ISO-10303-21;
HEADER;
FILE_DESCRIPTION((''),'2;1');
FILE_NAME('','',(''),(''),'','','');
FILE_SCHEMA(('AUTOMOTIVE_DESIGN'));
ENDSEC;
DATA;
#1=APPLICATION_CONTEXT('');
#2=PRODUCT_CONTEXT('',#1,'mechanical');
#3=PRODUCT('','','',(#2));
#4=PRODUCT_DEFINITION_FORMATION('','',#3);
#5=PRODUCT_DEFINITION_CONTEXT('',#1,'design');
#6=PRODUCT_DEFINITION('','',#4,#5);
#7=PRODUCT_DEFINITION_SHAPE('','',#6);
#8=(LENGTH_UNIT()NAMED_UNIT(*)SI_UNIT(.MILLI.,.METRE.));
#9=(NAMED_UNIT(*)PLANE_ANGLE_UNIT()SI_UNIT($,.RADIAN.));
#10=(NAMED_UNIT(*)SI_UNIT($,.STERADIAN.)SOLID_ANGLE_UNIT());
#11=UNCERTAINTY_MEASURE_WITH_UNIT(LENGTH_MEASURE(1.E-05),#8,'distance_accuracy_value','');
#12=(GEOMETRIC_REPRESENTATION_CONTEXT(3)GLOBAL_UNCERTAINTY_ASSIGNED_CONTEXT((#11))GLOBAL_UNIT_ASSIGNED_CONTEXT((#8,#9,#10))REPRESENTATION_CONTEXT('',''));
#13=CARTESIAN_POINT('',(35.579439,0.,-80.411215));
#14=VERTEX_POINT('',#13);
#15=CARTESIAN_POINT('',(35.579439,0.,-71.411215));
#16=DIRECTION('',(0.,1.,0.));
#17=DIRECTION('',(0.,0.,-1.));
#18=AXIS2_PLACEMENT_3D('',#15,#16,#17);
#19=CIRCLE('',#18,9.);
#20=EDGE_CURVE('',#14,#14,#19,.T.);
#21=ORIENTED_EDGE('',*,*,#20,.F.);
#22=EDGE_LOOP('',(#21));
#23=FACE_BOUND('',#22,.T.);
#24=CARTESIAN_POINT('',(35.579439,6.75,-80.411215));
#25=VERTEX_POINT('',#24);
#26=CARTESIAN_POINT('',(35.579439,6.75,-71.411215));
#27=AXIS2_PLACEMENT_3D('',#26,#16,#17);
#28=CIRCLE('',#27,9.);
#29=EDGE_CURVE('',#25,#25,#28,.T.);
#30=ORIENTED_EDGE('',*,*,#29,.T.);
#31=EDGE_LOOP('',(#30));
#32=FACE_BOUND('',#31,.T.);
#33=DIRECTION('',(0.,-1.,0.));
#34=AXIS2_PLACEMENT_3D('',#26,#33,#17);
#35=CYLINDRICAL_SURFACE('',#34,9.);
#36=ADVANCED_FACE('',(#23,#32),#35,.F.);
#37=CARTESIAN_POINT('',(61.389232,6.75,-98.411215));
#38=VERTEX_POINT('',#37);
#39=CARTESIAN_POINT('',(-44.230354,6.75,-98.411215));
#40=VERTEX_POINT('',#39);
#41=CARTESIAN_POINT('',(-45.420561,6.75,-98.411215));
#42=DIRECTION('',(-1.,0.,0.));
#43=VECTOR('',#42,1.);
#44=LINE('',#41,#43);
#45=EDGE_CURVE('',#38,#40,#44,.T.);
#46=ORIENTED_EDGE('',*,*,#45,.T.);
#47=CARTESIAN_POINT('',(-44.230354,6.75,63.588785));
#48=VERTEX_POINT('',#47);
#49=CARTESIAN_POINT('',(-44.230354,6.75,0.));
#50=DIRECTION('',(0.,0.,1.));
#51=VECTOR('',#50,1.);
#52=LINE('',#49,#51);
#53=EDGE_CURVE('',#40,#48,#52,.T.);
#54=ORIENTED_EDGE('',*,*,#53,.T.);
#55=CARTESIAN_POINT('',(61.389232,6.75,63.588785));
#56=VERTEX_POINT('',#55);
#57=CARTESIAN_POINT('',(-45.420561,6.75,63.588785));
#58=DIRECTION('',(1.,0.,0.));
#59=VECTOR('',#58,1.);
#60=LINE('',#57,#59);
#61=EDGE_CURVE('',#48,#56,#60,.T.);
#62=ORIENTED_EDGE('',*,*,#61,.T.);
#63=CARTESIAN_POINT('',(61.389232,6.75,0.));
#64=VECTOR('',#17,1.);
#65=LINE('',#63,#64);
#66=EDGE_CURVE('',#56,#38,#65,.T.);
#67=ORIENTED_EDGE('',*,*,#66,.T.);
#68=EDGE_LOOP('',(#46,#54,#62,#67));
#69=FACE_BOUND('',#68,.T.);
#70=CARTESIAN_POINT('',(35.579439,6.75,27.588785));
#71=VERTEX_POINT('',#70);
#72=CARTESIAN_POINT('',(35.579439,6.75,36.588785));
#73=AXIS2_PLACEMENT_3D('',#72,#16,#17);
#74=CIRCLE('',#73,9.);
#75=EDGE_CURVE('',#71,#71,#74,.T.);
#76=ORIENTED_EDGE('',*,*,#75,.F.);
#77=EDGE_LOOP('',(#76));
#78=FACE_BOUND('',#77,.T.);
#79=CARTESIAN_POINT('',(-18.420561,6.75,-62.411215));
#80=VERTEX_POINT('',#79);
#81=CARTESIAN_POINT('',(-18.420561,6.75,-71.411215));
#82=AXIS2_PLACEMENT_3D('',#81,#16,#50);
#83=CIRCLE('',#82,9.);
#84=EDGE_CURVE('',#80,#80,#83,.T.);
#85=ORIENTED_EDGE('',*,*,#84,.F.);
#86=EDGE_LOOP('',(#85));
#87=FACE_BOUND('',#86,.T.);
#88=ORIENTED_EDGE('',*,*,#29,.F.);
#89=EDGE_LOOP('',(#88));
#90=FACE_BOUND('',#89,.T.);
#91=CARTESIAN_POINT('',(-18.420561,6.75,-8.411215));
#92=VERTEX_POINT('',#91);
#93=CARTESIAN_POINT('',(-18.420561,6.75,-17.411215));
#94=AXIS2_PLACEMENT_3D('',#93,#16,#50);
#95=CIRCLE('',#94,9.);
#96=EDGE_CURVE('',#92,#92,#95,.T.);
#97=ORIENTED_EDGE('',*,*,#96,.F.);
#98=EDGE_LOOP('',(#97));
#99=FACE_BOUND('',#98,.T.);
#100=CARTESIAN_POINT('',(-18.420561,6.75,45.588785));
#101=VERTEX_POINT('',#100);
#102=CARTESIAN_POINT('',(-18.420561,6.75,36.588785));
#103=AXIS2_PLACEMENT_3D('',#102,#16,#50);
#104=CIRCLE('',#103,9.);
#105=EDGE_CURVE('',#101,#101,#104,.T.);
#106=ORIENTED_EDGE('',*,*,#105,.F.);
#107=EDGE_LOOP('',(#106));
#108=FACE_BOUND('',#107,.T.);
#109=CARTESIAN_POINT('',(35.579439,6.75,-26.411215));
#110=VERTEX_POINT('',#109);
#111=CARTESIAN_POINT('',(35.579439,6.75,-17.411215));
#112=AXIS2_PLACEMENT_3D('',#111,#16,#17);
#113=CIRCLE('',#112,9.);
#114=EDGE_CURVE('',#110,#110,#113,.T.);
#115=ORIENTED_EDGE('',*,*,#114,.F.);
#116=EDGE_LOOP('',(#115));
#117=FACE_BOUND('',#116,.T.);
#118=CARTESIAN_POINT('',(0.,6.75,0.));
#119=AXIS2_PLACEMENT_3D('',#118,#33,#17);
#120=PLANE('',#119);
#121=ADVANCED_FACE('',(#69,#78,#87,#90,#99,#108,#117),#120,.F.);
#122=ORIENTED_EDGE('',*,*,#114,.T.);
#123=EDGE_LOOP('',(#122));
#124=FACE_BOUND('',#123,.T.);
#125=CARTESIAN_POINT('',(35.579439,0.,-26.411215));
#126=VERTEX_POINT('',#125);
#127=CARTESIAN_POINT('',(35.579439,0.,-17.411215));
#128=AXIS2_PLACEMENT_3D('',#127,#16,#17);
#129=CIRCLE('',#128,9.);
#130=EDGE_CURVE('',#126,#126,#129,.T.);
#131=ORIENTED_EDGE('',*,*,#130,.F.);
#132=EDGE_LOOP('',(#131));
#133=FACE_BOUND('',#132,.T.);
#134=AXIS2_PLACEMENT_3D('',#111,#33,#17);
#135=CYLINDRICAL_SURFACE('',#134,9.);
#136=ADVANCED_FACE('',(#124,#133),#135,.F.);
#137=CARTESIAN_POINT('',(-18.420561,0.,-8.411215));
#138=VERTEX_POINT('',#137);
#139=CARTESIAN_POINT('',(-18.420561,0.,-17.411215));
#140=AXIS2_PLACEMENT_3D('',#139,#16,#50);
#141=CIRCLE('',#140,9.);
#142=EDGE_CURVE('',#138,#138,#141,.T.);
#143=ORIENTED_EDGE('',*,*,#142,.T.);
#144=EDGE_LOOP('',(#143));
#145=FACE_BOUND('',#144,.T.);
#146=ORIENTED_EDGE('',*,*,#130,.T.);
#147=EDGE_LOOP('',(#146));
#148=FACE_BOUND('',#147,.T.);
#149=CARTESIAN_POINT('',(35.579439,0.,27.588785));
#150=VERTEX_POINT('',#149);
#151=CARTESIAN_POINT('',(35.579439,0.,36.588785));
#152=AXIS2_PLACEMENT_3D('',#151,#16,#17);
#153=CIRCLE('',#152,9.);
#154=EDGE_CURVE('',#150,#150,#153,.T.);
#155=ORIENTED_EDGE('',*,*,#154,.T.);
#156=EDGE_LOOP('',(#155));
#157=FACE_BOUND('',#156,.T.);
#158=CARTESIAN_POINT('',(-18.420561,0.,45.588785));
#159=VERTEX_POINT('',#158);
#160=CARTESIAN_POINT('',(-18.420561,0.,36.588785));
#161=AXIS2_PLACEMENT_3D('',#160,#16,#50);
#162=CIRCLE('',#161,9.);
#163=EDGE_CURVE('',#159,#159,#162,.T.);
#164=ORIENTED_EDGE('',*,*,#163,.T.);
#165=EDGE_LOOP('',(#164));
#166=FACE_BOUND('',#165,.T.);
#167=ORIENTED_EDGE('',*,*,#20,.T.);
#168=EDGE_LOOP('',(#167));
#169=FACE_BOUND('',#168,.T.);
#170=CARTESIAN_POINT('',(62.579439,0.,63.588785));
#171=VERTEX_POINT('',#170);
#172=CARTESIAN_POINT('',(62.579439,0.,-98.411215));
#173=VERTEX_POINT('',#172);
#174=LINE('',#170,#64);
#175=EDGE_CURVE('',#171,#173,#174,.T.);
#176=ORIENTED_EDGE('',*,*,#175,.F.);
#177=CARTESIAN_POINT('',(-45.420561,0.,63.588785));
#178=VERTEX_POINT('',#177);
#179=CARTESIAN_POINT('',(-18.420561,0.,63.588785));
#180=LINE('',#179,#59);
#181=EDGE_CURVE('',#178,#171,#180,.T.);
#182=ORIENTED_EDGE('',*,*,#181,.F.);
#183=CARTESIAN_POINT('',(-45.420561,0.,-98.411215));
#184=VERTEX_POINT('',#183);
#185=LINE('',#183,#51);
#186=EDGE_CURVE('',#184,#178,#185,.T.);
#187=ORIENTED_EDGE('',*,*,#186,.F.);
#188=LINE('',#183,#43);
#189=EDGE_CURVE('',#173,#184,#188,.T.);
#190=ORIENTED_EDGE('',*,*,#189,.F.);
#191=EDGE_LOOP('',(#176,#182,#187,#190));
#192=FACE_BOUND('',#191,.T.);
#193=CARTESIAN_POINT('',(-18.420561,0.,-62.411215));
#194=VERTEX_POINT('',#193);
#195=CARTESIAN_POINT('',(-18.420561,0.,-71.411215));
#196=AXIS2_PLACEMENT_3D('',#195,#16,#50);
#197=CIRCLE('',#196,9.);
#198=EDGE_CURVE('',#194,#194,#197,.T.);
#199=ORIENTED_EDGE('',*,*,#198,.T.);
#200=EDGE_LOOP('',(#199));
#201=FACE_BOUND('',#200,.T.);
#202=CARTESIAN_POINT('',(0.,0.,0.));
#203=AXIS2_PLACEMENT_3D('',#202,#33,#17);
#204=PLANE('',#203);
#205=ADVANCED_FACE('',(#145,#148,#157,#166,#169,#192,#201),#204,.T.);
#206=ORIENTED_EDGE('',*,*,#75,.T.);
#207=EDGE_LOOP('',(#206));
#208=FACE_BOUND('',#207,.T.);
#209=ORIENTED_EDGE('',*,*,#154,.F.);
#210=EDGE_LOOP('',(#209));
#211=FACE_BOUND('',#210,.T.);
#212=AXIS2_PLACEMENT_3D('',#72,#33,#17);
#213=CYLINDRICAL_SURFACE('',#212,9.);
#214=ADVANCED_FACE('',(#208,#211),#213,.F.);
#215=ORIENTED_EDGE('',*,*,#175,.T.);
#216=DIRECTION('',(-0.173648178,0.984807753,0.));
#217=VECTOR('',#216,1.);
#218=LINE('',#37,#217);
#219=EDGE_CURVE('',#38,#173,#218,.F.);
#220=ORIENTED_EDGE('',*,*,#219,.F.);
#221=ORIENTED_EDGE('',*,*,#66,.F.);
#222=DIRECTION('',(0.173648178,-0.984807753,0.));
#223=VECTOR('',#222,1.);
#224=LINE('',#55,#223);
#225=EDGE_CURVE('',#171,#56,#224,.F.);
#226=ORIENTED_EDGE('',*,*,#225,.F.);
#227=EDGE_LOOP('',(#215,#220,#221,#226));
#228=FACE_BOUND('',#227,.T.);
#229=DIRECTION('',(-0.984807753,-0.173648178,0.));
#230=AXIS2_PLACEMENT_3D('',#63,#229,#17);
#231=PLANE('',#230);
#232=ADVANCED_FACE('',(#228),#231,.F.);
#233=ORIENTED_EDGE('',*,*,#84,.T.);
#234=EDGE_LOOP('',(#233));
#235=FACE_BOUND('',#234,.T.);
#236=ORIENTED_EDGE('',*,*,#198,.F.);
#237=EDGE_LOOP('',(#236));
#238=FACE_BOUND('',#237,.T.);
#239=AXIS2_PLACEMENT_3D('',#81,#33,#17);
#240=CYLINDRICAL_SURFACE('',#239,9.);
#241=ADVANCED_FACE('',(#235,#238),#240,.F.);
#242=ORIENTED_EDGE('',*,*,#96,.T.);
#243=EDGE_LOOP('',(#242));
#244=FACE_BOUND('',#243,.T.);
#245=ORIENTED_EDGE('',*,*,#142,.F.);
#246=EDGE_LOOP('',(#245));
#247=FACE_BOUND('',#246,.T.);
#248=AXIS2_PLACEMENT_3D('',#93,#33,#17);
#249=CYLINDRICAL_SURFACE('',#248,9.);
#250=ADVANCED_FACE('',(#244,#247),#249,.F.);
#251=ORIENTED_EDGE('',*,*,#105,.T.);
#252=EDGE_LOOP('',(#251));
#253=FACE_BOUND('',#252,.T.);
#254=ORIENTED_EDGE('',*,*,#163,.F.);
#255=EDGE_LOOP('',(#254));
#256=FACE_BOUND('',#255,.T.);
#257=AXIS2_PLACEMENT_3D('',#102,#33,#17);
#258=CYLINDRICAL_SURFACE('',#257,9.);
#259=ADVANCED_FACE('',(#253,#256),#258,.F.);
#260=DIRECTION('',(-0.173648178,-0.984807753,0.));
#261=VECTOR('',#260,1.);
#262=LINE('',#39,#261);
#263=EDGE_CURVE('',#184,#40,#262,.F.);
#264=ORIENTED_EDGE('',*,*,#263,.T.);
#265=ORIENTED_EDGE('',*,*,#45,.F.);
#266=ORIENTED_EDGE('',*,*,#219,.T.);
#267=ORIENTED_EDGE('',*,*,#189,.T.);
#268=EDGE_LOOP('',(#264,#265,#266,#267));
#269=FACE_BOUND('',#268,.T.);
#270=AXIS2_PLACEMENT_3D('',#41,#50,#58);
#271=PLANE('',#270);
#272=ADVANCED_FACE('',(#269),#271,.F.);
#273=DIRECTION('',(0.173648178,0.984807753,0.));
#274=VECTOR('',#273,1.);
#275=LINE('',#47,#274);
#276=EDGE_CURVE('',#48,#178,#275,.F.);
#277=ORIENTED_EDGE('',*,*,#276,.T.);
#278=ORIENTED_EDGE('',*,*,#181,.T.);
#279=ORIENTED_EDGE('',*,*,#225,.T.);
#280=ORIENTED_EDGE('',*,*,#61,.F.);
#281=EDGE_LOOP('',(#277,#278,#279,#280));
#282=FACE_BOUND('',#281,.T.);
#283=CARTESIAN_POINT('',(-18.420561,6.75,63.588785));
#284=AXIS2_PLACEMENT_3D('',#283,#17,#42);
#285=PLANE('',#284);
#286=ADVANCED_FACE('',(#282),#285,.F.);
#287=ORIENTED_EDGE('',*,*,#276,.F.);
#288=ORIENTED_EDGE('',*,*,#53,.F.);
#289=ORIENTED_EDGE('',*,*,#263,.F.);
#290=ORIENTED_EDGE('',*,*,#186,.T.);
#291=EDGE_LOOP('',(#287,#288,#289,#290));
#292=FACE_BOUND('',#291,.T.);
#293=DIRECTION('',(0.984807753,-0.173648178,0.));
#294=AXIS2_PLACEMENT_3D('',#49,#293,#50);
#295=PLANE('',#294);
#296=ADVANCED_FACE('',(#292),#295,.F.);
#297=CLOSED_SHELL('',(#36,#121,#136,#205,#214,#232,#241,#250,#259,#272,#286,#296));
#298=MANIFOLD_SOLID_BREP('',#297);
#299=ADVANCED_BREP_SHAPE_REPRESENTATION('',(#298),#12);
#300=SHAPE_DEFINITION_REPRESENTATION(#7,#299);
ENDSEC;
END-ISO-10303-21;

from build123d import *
from OCP.BRepFilletAPI import BRepFilletAPI_MakeChamfer

# Parameters (mm, degrees)
SKETCH1_R           = 9
BOSS_EXTRUDE1_DEPTH = 6.75
CHAMFER1_SIZE       = 6.75
CHAMFER1_SIZE_2     = 1.19020712


with BuildPart() as part:
    # Sketch1 → Boss-Extrude1 (new body)
    with BuildSketch(Plane(origin=(0, 0, 0), x_dir=(1, 0, 0), z_dir=(0, 1, 0))):
        Polygon((-45.420560748, -63.588785047), (-18.420560748, -63.588785047), (62.579439252, -63.588785047), (62.579439252, 98.411214953), (-45.420560748, 98.411214953), (-45.420560748, -36.588785047), align=None)
        with Locations(Location((-18.420560748, -36.588785047, 0), (0, 0, 270))):
            Circle(SKETCH1_R, mode=Mode.SUBTRACT)
        with Locations(Location((35.579439252, 71.411214953, 0), (0, 0, 90))):
            Circle(SKETCH1_R, mode=Mode.SUBTRACT)
        with Locations(Location((35.579439252, 17.411214953, 0), (0, 0, 90))):
            Circle(SKETCH1_R, mode=Mode.SUBTRACT)
        with Locations(Location((-18.420560748, 17.411214953, 0), (0, 0, 270))):
            Circle(SKETCH1_R, mode=Mode.SUBTRACT)
        with Locations(Location((-18.420560748, 71.411214953, 0), (0, 0, 270))):
            Circle(SKETCH1_R, mode=Mode.SUBTRACT)
        with Locations(Location((35.579439252, -36.588785047, 0), (0, 0, 90))):
            Circle(SKETCH1_R, mode=Mode.SUBTRACT)
    extrude(amount=BOSS_EXTRUDE1_DEPTH)

    # Chamfer1
    chamfer1_edges_1 = [part.edges().sort_by_distance(p)[0] for p in [
        (62.579439252, 6.75, -17.411214953),
    ]]
    chamfer1_side_1 = [part.faces().sort_by_distance(p)[0] for p in [
        (62.579439252, 6.726195858, -17.411214953),
    ]]
    chamfer1_edges_2 = [part.edges().sort_by_distance(p)[0] for p in [
        (-45.420560748, 6.75, -17.411214953),
    ]]
    chamfer1_side_2 = [part.faces().sort_by_distance(p)[0] for p in [
        (-45.396756605, 6.75, -17.411214953),
    ]]
    chamfer1 = BRepFilletAPI_MakeChamfer(part.part.solid().wrapped)
    for e in chamfer1_edges_1:
        chamfer1.Add(CHAMFER1_SIZE - 0.0001, CHAMFER1_SIZE_2 - 0.0001, e.wrapped, chamfer1_side_1[0].wrapped)
    for e in chamfer1_edges_2:
        chamfer1.Add(CHAMFER1_SIZE_2 - 0.0001, CHAMFER1_SIZE - 0.0001, e.wrapped, chamfer1_side_2[0].wrapped)
    add(Compound.cast(chamfer1.Shape()), mode=Mode.REPLACE)  # a hair under: the kernel refuses the full size


solid = part.part
